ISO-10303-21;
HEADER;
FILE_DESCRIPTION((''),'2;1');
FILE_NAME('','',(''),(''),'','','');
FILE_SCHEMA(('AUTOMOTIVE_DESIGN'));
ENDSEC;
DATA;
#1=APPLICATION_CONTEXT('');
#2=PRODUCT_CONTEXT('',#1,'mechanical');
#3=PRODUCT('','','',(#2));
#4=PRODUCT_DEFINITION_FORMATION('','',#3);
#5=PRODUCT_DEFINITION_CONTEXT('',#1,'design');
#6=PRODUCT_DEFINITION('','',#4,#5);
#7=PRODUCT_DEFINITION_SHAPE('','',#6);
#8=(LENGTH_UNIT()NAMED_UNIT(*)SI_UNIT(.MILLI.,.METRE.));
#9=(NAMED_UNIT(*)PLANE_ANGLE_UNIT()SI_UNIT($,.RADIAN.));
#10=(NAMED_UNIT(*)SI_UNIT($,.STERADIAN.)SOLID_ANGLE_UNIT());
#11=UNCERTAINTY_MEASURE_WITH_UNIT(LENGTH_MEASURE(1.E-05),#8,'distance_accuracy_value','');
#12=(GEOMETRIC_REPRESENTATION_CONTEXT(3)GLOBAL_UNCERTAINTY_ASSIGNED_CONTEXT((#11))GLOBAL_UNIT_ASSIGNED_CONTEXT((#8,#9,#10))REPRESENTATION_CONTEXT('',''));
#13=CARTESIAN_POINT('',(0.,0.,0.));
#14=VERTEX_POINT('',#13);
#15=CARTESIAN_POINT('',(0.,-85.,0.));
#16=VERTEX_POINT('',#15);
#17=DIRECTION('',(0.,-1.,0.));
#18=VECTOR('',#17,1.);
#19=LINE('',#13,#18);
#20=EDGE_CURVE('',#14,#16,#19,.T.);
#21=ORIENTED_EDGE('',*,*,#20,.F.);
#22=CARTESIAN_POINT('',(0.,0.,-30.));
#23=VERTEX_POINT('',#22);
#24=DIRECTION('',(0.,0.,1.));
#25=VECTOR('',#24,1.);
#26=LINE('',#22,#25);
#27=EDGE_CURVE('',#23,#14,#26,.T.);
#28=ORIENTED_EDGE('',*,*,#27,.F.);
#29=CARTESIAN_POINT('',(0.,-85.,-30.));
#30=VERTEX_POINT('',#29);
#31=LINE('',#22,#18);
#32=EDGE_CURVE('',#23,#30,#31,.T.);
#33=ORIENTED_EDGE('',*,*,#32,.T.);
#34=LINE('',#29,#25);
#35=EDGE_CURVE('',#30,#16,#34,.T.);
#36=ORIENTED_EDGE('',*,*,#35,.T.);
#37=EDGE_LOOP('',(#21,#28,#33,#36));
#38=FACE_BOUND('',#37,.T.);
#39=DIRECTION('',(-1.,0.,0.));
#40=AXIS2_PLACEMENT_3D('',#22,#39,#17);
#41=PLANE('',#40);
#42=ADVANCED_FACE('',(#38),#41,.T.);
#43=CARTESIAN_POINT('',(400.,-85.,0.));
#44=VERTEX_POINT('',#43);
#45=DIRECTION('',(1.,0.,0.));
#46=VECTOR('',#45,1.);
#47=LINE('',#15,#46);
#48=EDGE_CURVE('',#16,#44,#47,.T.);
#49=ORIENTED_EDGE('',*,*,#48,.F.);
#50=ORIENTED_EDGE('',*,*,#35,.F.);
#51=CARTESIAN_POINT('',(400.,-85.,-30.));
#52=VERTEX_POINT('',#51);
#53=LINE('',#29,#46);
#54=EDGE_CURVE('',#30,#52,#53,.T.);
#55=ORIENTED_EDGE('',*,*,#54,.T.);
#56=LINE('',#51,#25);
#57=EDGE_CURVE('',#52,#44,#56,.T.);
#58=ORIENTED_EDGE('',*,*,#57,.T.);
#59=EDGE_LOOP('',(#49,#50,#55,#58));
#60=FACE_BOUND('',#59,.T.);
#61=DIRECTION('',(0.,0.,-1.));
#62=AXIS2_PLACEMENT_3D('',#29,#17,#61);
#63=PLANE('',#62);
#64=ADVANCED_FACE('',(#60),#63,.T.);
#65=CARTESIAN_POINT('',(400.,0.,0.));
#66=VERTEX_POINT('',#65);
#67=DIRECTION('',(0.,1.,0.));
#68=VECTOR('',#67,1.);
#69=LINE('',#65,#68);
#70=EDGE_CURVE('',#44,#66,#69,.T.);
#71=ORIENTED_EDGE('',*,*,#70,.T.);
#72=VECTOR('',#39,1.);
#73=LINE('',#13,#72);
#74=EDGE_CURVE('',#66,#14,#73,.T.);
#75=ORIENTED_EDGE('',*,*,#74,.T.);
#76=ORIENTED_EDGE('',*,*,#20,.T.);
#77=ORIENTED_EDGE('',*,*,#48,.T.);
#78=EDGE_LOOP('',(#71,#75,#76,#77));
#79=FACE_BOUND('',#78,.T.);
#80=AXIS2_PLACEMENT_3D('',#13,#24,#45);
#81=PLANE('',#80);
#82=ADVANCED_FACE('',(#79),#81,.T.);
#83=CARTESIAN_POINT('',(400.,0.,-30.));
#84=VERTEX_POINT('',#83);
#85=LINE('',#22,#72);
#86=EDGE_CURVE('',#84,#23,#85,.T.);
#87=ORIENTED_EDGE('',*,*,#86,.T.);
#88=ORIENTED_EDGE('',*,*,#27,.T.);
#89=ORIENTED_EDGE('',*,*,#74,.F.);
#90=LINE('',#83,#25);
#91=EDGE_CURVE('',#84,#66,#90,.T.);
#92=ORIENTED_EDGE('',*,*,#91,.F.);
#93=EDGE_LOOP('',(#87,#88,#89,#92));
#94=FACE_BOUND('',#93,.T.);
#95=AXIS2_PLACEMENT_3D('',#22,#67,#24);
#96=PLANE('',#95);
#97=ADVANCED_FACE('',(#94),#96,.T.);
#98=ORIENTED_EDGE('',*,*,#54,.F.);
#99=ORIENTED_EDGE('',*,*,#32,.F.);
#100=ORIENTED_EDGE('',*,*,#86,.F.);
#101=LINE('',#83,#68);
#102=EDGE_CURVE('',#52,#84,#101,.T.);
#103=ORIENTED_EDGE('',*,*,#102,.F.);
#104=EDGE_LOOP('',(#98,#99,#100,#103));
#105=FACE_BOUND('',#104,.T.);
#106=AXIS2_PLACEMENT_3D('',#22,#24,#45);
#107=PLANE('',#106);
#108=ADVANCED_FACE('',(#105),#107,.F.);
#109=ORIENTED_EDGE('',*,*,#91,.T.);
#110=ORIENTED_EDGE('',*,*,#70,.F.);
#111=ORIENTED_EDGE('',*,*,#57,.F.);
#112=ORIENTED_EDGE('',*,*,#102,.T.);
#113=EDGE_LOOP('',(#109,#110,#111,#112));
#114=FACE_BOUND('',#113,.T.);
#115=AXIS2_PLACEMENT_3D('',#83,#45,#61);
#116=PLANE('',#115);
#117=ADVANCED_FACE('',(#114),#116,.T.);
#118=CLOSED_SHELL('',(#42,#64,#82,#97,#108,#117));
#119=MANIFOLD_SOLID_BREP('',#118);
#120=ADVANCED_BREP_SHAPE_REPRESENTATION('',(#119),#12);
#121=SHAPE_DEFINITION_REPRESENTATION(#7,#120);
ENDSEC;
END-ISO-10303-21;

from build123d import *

# Parameters (mm, degrees)
IZIM1_W            = 400
IZIM1_H            = 85
TABAN_FLAN_1_DEPTH = 30


# Sheet-metal steps are written as plain solids
with BuildPart() as part:
    # Çizim1 → Taban-Flanş1 (new body)
    with BuildSketch(Plane.XY):
        with Locations((200, -42.5)):
            Rectangle(IZIM1_W, IZIM1_H)
    extrude(amount=-TABAN_FLAN_1_DEPTH)


solid = part.part
